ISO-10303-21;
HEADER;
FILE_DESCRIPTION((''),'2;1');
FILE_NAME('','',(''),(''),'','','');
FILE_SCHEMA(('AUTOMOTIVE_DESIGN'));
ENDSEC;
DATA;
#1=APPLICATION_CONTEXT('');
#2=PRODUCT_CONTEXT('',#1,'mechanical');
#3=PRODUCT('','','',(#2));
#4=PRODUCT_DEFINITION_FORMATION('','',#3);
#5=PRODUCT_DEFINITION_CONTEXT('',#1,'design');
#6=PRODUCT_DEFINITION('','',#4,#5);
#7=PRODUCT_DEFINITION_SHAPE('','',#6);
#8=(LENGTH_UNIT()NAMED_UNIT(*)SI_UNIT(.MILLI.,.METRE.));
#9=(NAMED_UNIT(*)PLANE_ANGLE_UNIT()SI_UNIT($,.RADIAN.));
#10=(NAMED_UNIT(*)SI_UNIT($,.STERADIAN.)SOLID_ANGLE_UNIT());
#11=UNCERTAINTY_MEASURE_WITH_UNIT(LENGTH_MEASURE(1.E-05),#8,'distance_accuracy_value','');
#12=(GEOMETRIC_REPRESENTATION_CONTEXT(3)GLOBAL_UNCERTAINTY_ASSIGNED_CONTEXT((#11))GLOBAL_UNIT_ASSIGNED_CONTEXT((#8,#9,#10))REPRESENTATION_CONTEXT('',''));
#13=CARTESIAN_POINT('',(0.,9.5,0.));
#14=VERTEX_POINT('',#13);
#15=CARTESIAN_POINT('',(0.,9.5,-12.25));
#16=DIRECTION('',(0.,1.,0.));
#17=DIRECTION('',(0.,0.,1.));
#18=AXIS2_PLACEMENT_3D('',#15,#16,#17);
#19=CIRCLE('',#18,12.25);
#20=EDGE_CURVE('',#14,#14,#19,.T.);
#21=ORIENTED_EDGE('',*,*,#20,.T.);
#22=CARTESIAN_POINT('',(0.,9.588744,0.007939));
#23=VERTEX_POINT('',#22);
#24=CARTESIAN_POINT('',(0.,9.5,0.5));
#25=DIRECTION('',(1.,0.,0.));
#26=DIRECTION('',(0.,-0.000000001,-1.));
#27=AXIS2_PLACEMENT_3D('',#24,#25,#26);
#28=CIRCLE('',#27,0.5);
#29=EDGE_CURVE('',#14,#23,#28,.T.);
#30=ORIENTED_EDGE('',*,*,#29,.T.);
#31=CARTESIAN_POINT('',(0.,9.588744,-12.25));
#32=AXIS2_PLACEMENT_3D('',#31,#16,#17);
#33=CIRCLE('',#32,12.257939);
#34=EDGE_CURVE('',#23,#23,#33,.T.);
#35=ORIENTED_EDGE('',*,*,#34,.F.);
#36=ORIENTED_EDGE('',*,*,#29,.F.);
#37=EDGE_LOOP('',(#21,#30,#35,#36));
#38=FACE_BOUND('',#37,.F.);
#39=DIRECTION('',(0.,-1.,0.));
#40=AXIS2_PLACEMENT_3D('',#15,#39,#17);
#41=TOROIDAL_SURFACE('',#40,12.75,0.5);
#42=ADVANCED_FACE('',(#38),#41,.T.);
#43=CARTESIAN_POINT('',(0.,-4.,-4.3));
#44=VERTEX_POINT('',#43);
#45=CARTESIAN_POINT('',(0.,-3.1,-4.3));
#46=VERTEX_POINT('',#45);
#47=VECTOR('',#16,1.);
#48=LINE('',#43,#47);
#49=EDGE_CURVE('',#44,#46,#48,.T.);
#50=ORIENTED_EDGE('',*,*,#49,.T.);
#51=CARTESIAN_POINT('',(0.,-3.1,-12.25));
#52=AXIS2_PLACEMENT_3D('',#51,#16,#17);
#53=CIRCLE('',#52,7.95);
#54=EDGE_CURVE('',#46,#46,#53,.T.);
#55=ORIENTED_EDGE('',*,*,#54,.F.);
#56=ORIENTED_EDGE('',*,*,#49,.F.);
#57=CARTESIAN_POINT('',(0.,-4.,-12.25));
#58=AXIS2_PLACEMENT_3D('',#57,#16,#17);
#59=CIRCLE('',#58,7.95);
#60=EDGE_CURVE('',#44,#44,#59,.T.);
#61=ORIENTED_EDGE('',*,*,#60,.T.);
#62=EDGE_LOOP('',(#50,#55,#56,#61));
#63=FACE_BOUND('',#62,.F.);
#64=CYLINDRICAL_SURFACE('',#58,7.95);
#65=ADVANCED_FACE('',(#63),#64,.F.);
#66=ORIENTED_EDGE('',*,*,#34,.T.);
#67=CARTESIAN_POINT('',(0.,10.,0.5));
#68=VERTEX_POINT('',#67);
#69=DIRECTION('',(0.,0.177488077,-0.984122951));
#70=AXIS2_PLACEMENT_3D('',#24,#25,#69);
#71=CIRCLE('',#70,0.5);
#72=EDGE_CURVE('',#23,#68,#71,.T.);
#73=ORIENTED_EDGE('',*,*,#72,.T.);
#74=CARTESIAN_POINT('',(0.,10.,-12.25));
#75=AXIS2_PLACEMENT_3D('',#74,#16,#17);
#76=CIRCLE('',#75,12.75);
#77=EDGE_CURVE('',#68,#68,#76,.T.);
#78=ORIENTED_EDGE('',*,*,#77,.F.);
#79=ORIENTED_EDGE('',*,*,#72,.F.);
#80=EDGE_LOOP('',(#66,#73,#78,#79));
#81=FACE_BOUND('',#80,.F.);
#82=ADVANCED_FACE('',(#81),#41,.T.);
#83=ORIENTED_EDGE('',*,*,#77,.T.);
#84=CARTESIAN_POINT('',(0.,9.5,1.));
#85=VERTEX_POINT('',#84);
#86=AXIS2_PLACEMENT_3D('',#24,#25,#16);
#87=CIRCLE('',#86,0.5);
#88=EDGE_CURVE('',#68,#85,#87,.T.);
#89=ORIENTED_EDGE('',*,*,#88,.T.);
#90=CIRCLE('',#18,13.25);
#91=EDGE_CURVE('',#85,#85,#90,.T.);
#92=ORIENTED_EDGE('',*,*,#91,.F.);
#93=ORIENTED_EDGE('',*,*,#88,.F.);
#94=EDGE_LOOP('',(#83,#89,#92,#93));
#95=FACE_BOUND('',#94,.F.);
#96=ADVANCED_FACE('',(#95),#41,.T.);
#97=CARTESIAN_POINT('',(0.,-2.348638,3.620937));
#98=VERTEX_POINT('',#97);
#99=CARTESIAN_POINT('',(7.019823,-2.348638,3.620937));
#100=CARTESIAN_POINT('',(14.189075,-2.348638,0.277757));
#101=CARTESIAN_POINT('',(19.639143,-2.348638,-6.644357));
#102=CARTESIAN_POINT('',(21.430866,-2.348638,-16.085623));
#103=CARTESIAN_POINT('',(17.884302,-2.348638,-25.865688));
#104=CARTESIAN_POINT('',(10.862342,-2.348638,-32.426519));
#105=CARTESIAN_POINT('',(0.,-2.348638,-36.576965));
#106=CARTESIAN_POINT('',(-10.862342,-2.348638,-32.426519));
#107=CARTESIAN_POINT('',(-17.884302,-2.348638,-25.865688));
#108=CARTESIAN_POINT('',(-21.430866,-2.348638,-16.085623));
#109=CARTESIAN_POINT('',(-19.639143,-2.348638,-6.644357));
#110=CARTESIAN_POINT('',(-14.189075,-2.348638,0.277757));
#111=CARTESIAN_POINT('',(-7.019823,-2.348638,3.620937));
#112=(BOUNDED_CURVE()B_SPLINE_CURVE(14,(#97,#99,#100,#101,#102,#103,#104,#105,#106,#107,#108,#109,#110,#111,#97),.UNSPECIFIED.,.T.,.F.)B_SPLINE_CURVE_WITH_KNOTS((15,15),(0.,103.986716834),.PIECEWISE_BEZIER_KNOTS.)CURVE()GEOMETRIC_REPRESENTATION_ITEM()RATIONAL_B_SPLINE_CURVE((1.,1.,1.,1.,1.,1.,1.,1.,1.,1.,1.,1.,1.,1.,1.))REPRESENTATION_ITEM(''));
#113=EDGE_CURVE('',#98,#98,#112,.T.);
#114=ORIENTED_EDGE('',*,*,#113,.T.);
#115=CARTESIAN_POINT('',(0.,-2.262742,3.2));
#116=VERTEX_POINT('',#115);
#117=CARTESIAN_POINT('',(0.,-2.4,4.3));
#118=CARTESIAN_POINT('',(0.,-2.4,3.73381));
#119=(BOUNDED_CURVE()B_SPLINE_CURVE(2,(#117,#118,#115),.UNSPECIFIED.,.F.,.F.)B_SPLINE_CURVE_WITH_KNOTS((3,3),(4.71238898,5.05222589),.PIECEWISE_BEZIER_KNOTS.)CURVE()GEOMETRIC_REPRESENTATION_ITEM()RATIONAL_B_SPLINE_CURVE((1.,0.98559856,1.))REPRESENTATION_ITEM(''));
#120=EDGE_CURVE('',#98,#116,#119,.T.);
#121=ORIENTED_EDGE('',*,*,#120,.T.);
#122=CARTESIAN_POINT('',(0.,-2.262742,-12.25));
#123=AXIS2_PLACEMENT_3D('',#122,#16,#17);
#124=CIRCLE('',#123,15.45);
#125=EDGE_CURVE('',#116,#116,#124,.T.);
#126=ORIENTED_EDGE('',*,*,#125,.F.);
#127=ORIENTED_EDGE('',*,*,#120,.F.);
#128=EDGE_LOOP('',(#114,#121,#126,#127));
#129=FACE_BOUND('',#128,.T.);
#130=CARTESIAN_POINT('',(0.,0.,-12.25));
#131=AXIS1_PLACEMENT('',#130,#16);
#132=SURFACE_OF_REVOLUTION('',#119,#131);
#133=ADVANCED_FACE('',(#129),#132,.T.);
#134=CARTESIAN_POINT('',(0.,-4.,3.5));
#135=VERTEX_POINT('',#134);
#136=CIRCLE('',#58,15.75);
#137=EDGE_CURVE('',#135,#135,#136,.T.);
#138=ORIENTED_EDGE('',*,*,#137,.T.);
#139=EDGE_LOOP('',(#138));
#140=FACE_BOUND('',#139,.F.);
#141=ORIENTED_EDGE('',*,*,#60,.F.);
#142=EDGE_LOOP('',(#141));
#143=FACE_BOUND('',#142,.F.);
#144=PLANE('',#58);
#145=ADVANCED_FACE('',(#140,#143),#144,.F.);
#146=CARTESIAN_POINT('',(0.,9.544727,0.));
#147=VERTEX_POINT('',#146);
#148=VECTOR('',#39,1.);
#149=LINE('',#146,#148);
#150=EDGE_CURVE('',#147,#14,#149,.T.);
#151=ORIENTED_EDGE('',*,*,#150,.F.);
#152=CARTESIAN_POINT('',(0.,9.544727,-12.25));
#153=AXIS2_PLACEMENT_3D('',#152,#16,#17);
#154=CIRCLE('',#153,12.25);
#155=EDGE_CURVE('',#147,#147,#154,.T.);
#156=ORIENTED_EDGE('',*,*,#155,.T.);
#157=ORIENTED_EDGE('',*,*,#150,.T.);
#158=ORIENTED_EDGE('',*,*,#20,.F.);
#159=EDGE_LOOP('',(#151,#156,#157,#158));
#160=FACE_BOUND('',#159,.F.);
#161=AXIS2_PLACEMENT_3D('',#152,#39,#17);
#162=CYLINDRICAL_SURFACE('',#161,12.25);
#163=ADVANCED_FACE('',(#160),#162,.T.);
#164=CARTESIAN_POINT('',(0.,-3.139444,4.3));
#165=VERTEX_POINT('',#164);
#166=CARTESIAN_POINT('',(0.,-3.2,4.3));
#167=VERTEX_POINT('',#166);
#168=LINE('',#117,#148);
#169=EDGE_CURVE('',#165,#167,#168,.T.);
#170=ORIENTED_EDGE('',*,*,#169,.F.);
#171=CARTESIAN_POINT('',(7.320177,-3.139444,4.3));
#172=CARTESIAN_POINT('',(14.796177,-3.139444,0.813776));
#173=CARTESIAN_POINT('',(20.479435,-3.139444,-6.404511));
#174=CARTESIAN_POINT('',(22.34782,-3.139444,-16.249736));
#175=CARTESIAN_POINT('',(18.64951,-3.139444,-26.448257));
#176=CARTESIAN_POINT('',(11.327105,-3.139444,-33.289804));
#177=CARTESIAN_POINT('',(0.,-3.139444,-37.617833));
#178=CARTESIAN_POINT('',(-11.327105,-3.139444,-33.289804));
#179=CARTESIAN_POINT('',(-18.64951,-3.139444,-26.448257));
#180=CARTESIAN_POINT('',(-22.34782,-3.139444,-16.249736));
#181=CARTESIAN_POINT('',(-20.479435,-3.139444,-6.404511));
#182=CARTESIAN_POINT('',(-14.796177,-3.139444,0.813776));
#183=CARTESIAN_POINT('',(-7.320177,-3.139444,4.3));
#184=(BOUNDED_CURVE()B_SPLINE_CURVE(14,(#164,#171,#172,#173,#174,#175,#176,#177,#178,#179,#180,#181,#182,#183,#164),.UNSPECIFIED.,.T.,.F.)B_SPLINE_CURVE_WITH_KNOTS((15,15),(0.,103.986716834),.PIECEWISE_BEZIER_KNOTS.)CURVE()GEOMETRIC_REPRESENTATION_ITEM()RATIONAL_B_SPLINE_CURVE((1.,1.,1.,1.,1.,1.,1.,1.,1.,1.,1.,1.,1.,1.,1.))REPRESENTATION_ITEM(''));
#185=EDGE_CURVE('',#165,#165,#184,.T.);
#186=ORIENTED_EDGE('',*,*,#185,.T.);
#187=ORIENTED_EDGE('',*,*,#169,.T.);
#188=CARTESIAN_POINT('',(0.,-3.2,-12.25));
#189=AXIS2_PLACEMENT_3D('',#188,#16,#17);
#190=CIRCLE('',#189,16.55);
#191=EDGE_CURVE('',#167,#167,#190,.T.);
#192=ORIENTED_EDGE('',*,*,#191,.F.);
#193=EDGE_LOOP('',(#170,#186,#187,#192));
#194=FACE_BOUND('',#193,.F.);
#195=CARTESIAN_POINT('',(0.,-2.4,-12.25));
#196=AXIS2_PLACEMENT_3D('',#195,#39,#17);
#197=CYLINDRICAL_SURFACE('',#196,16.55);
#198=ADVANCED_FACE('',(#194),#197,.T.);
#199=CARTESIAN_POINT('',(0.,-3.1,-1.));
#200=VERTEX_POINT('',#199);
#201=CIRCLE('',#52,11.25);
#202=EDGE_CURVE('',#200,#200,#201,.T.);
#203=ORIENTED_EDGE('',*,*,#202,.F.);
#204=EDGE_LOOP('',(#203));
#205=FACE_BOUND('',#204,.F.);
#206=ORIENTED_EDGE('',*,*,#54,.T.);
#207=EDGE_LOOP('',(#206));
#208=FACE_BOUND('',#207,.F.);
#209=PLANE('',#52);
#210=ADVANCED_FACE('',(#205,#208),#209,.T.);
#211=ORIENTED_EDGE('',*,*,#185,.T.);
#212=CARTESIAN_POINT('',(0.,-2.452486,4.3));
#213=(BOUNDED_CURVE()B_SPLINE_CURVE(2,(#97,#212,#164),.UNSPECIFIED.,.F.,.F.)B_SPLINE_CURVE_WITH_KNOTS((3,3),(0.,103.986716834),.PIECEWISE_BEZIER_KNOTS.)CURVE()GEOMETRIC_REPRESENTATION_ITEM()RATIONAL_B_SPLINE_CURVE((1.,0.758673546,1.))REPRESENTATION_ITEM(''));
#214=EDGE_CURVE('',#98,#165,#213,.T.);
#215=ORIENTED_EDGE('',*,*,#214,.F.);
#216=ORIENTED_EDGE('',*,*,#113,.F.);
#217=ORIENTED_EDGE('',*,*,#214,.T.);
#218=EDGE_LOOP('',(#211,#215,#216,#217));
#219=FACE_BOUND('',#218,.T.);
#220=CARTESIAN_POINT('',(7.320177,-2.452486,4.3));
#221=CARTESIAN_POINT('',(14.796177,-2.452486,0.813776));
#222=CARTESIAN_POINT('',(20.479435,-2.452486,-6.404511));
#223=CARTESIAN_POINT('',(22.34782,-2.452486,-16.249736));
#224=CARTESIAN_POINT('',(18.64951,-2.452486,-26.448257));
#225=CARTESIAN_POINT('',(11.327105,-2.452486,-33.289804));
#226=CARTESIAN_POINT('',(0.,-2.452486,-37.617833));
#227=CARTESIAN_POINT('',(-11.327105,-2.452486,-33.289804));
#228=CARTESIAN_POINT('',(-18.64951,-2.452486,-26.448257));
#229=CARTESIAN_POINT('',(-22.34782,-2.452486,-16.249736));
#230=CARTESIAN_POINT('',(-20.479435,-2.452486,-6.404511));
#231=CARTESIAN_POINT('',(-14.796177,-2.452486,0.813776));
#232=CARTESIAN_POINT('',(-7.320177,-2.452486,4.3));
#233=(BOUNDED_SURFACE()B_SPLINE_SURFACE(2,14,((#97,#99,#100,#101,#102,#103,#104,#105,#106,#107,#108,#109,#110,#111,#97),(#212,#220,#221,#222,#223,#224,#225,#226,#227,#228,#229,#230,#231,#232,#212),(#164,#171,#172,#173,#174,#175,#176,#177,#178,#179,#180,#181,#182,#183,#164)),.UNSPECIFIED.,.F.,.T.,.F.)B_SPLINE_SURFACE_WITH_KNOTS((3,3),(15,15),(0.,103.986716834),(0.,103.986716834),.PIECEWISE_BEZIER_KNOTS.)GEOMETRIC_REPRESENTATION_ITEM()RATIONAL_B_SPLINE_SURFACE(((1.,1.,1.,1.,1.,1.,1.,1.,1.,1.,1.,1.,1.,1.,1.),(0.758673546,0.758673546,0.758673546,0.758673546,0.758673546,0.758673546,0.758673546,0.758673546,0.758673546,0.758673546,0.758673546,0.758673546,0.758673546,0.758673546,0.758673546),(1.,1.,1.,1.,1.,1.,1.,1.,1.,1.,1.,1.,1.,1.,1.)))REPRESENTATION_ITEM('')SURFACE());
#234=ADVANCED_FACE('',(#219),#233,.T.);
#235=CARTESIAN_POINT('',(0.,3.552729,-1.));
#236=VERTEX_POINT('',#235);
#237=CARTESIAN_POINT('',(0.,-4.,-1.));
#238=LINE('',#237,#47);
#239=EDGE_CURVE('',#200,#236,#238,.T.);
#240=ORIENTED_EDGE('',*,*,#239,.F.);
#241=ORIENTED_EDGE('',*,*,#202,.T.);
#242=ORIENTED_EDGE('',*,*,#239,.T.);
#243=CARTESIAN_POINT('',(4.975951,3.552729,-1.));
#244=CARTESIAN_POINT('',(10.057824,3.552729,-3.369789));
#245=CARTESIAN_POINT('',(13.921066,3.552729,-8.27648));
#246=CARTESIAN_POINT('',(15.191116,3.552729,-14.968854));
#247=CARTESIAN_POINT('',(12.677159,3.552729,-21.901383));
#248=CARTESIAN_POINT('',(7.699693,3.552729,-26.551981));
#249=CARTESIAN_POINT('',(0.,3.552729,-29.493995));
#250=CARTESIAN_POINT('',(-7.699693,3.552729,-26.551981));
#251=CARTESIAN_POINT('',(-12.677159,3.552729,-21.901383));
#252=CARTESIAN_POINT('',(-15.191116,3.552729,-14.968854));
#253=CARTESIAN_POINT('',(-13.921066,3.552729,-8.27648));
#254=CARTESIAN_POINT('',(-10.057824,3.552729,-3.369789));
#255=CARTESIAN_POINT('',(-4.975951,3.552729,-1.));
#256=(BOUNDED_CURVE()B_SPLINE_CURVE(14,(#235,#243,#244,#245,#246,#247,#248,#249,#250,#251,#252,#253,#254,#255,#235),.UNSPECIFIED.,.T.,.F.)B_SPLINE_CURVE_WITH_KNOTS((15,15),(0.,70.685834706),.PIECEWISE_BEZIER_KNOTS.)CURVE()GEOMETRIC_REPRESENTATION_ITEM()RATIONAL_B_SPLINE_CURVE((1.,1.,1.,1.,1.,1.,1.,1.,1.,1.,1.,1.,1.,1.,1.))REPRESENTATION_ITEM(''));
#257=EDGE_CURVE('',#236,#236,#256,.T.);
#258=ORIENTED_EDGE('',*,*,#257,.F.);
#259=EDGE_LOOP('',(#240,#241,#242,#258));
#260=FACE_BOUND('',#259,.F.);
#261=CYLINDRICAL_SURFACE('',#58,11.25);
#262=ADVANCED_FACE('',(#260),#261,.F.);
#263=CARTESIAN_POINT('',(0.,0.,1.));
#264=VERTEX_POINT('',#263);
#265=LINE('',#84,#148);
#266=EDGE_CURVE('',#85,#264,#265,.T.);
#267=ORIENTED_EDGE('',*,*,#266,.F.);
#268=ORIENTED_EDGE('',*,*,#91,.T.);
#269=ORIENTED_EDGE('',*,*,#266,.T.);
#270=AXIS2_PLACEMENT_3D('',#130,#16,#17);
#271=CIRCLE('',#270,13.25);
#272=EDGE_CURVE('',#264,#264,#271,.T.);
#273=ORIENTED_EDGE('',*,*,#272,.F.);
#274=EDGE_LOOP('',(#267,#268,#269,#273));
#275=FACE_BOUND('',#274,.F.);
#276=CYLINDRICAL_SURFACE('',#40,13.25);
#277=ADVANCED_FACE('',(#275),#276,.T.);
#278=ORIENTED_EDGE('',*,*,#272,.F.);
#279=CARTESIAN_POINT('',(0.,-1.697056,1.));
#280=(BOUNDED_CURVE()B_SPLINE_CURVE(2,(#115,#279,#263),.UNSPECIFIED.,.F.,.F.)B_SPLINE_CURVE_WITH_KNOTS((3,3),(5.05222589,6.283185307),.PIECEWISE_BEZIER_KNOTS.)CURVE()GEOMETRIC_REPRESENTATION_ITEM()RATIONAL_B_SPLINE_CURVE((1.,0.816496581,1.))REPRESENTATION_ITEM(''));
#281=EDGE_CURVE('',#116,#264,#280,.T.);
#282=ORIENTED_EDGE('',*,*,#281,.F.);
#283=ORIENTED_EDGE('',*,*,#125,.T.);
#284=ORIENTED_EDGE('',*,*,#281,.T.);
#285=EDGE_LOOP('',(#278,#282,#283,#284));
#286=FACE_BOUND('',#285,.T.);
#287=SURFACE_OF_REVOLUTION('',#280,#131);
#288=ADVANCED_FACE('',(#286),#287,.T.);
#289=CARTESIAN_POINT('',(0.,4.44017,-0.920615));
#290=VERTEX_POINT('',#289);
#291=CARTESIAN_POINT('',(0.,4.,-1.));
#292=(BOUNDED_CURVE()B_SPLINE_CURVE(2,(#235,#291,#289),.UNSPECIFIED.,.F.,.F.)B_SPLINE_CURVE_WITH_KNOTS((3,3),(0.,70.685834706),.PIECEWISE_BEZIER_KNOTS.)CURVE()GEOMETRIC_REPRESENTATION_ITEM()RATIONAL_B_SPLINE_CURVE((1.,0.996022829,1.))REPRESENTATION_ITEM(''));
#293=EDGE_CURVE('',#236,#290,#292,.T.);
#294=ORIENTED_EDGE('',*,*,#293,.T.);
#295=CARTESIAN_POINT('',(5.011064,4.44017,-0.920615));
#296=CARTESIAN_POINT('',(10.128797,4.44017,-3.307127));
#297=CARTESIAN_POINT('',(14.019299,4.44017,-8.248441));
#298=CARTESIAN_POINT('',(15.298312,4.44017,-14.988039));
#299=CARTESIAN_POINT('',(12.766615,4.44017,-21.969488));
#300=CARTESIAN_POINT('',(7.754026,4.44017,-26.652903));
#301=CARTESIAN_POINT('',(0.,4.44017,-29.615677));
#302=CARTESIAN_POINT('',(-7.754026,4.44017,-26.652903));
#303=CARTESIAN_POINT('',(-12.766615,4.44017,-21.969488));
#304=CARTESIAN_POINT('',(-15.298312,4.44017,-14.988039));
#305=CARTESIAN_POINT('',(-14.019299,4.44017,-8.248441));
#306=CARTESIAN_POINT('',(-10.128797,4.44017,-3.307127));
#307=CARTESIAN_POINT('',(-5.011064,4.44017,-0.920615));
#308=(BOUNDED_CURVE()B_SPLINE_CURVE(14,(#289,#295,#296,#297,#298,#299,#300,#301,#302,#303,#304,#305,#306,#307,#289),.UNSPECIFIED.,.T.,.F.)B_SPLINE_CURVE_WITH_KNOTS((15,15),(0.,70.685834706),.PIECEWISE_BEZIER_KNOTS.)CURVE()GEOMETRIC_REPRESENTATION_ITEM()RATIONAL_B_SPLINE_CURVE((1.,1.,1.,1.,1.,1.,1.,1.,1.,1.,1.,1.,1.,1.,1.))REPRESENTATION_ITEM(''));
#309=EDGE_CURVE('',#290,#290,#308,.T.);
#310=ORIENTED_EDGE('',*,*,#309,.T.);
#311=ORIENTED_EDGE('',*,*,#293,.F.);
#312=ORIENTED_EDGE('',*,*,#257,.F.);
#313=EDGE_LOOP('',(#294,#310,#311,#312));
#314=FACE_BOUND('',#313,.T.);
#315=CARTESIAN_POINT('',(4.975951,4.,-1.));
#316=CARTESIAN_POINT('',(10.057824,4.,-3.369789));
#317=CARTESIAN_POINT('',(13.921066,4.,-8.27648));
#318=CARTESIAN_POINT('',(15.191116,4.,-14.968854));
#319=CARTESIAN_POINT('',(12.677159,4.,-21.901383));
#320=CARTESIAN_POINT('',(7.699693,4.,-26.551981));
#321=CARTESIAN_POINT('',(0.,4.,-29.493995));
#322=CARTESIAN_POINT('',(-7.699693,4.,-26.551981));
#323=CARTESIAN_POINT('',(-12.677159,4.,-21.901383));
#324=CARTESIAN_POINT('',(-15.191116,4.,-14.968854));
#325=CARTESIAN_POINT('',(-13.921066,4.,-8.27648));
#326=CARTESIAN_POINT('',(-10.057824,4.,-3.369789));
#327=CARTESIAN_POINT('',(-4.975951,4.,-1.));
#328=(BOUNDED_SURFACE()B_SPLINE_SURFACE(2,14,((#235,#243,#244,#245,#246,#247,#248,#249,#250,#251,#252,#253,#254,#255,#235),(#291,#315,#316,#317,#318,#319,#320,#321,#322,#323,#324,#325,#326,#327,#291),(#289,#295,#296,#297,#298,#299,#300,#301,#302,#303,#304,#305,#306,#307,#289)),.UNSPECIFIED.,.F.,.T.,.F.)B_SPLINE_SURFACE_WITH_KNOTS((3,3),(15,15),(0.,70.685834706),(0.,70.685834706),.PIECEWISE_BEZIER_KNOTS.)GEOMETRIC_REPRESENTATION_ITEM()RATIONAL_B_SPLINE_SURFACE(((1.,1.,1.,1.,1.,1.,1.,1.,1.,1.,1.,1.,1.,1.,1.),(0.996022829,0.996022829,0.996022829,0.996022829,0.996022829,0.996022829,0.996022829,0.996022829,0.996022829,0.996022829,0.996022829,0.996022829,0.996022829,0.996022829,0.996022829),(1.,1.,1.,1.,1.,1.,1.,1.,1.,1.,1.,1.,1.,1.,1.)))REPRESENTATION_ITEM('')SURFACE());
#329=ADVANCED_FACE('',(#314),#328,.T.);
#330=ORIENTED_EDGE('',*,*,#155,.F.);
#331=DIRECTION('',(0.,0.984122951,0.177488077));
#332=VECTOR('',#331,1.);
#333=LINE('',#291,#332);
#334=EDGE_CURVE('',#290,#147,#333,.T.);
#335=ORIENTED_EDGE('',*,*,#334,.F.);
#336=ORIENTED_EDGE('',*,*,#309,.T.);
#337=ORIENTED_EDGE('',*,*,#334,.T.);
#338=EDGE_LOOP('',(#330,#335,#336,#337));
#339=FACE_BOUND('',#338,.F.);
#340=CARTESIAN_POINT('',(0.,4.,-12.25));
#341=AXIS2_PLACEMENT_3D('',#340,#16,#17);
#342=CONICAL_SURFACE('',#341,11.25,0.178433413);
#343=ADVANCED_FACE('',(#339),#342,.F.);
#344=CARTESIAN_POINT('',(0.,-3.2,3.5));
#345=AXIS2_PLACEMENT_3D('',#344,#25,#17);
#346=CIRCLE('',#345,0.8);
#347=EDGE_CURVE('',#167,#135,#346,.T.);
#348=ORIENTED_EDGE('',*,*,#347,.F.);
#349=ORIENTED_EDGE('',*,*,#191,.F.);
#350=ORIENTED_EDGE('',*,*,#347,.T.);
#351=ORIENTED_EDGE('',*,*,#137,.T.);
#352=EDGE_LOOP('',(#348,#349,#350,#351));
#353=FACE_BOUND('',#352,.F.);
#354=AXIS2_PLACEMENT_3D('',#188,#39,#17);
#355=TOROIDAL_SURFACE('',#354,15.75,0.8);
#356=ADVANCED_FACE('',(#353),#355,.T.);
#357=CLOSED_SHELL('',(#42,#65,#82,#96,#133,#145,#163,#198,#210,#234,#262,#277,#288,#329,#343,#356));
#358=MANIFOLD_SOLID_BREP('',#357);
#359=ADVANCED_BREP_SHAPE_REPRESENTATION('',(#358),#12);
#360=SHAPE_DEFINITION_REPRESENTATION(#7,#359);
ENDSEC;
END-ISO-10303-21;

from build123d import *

# Parameters (mm, degrees)
F2_R = 0.8
F3_R = 5


# Not quite as in the source:
# - a feature names something its author has since deleted; it is built from what else it names


with BuildPart() as f1:
    # F0 (on Right) → F1 (revolve)
    with BuildSketch(Plane.YZ):
        Polygon((-3.1, -1), (4, -1), (4, 0), (4, 1), (0, 1), (-4, 1), (-4, -1), align=None)
        Polygon((-3.1, -4.3), (-3.1, -1), (-4, -1), (-4, -2), (-4, -4.3), align=None)
        with BuildLine():
            Line((-4, 3.2), (-4, 1))
            Line((-4, 1), (0, 1))
            add(Edge.make_bspline(
                [(-2.2627416998, 3.2), (-1.6970562748, 1), (0, 1)],
                knots=[5.0522258898, 5.0522258898, 5.0522258898, 6.2831853072, 6.2831853072, 6.2831853072], degree=2, weights=[1, 0.8164965809, 1]))
            Line((-2.2627416998, 3.2), (-4, 3.2))
        make_face()
        with BuildLine():
            Line((-4, 4.3), (-4, 3.2))
            Line((-4, 3.2), (-2.2627416998, 3.2))
            add(Edge.make_bspline(
                [(-2.4, 4.3), (-2.4, 3.7338095117), (-2.2627416998, 3.2)],
                knots=[4.7123889804, 4.7123889804, 4.7123889804, 5.0522258898, 5.0522258898, 5.0522258898], degree=2, weights=[1, 0.9855985597, 1]))
            Line((-2.4, 4.3), (-4, 4.3))
        make_face()
        with BuildLine():
            Line((4, 1), (4, 0))
            Line((4, 0), (9.5, 0))
            ThreePointArc((9.5, 0), (9.1464466094, 0.1464466094), (9, 0.5))
            ThreePointArc((9, 0.5), (9.1464466094, 0.8535533906), (9.5, 1))
            Line((9.5, 1), (4, 1))
        make_face()
        with BuildLine():
            ThreePointArc((9, 0.5), (9.1464466094, 0.1464466094), (9.5, 0))
            ThreePointArc((9.5, 0), (9.5445491992, 0.0019885856), (9.5887440387, 0.0079385246))
            ThreePointArc((9.5887440387, 0.0079385246), (9.883648289, 0.1793537926), (10, 0.5))
            Line((10, 0.5), (9, 0.5))
        make_face()
        with BuildLine():
            ThreePointArc((10, 0.5), (9.8535533906, 0.8535533906), (9.5, 1))
            ThreePointArc((9.5, 1), (9.1464466094, 0.8535533906), (9, 0.5))
            Line((9, 0.5), (10, 0.5))
        make_face()
        Polygon((4, 0), (4, -1), (9.5447270865, 0), (9.5, 0), align=None)
    revolve(axis=Axis((0, 0, -12.25), (0, 1, 0)))

    # F2
    f2_edges = [f1.edges().sort_by_distance(p)[0] for p in [
        (0, -1.822195, 2.152356),
        (0, -2.4, -28.8),
        (0, -4, -28.8),
    ]]
    fillet(f2_edges, radius=F2_R)

    # F3
    f3_edges = [f1.edges().sort_by_distance(p)[0] for p in [
        (0, 4, -23.5),
    ]]
    fillet(f3_edges, radius=F3_R)


solid = f1.part
